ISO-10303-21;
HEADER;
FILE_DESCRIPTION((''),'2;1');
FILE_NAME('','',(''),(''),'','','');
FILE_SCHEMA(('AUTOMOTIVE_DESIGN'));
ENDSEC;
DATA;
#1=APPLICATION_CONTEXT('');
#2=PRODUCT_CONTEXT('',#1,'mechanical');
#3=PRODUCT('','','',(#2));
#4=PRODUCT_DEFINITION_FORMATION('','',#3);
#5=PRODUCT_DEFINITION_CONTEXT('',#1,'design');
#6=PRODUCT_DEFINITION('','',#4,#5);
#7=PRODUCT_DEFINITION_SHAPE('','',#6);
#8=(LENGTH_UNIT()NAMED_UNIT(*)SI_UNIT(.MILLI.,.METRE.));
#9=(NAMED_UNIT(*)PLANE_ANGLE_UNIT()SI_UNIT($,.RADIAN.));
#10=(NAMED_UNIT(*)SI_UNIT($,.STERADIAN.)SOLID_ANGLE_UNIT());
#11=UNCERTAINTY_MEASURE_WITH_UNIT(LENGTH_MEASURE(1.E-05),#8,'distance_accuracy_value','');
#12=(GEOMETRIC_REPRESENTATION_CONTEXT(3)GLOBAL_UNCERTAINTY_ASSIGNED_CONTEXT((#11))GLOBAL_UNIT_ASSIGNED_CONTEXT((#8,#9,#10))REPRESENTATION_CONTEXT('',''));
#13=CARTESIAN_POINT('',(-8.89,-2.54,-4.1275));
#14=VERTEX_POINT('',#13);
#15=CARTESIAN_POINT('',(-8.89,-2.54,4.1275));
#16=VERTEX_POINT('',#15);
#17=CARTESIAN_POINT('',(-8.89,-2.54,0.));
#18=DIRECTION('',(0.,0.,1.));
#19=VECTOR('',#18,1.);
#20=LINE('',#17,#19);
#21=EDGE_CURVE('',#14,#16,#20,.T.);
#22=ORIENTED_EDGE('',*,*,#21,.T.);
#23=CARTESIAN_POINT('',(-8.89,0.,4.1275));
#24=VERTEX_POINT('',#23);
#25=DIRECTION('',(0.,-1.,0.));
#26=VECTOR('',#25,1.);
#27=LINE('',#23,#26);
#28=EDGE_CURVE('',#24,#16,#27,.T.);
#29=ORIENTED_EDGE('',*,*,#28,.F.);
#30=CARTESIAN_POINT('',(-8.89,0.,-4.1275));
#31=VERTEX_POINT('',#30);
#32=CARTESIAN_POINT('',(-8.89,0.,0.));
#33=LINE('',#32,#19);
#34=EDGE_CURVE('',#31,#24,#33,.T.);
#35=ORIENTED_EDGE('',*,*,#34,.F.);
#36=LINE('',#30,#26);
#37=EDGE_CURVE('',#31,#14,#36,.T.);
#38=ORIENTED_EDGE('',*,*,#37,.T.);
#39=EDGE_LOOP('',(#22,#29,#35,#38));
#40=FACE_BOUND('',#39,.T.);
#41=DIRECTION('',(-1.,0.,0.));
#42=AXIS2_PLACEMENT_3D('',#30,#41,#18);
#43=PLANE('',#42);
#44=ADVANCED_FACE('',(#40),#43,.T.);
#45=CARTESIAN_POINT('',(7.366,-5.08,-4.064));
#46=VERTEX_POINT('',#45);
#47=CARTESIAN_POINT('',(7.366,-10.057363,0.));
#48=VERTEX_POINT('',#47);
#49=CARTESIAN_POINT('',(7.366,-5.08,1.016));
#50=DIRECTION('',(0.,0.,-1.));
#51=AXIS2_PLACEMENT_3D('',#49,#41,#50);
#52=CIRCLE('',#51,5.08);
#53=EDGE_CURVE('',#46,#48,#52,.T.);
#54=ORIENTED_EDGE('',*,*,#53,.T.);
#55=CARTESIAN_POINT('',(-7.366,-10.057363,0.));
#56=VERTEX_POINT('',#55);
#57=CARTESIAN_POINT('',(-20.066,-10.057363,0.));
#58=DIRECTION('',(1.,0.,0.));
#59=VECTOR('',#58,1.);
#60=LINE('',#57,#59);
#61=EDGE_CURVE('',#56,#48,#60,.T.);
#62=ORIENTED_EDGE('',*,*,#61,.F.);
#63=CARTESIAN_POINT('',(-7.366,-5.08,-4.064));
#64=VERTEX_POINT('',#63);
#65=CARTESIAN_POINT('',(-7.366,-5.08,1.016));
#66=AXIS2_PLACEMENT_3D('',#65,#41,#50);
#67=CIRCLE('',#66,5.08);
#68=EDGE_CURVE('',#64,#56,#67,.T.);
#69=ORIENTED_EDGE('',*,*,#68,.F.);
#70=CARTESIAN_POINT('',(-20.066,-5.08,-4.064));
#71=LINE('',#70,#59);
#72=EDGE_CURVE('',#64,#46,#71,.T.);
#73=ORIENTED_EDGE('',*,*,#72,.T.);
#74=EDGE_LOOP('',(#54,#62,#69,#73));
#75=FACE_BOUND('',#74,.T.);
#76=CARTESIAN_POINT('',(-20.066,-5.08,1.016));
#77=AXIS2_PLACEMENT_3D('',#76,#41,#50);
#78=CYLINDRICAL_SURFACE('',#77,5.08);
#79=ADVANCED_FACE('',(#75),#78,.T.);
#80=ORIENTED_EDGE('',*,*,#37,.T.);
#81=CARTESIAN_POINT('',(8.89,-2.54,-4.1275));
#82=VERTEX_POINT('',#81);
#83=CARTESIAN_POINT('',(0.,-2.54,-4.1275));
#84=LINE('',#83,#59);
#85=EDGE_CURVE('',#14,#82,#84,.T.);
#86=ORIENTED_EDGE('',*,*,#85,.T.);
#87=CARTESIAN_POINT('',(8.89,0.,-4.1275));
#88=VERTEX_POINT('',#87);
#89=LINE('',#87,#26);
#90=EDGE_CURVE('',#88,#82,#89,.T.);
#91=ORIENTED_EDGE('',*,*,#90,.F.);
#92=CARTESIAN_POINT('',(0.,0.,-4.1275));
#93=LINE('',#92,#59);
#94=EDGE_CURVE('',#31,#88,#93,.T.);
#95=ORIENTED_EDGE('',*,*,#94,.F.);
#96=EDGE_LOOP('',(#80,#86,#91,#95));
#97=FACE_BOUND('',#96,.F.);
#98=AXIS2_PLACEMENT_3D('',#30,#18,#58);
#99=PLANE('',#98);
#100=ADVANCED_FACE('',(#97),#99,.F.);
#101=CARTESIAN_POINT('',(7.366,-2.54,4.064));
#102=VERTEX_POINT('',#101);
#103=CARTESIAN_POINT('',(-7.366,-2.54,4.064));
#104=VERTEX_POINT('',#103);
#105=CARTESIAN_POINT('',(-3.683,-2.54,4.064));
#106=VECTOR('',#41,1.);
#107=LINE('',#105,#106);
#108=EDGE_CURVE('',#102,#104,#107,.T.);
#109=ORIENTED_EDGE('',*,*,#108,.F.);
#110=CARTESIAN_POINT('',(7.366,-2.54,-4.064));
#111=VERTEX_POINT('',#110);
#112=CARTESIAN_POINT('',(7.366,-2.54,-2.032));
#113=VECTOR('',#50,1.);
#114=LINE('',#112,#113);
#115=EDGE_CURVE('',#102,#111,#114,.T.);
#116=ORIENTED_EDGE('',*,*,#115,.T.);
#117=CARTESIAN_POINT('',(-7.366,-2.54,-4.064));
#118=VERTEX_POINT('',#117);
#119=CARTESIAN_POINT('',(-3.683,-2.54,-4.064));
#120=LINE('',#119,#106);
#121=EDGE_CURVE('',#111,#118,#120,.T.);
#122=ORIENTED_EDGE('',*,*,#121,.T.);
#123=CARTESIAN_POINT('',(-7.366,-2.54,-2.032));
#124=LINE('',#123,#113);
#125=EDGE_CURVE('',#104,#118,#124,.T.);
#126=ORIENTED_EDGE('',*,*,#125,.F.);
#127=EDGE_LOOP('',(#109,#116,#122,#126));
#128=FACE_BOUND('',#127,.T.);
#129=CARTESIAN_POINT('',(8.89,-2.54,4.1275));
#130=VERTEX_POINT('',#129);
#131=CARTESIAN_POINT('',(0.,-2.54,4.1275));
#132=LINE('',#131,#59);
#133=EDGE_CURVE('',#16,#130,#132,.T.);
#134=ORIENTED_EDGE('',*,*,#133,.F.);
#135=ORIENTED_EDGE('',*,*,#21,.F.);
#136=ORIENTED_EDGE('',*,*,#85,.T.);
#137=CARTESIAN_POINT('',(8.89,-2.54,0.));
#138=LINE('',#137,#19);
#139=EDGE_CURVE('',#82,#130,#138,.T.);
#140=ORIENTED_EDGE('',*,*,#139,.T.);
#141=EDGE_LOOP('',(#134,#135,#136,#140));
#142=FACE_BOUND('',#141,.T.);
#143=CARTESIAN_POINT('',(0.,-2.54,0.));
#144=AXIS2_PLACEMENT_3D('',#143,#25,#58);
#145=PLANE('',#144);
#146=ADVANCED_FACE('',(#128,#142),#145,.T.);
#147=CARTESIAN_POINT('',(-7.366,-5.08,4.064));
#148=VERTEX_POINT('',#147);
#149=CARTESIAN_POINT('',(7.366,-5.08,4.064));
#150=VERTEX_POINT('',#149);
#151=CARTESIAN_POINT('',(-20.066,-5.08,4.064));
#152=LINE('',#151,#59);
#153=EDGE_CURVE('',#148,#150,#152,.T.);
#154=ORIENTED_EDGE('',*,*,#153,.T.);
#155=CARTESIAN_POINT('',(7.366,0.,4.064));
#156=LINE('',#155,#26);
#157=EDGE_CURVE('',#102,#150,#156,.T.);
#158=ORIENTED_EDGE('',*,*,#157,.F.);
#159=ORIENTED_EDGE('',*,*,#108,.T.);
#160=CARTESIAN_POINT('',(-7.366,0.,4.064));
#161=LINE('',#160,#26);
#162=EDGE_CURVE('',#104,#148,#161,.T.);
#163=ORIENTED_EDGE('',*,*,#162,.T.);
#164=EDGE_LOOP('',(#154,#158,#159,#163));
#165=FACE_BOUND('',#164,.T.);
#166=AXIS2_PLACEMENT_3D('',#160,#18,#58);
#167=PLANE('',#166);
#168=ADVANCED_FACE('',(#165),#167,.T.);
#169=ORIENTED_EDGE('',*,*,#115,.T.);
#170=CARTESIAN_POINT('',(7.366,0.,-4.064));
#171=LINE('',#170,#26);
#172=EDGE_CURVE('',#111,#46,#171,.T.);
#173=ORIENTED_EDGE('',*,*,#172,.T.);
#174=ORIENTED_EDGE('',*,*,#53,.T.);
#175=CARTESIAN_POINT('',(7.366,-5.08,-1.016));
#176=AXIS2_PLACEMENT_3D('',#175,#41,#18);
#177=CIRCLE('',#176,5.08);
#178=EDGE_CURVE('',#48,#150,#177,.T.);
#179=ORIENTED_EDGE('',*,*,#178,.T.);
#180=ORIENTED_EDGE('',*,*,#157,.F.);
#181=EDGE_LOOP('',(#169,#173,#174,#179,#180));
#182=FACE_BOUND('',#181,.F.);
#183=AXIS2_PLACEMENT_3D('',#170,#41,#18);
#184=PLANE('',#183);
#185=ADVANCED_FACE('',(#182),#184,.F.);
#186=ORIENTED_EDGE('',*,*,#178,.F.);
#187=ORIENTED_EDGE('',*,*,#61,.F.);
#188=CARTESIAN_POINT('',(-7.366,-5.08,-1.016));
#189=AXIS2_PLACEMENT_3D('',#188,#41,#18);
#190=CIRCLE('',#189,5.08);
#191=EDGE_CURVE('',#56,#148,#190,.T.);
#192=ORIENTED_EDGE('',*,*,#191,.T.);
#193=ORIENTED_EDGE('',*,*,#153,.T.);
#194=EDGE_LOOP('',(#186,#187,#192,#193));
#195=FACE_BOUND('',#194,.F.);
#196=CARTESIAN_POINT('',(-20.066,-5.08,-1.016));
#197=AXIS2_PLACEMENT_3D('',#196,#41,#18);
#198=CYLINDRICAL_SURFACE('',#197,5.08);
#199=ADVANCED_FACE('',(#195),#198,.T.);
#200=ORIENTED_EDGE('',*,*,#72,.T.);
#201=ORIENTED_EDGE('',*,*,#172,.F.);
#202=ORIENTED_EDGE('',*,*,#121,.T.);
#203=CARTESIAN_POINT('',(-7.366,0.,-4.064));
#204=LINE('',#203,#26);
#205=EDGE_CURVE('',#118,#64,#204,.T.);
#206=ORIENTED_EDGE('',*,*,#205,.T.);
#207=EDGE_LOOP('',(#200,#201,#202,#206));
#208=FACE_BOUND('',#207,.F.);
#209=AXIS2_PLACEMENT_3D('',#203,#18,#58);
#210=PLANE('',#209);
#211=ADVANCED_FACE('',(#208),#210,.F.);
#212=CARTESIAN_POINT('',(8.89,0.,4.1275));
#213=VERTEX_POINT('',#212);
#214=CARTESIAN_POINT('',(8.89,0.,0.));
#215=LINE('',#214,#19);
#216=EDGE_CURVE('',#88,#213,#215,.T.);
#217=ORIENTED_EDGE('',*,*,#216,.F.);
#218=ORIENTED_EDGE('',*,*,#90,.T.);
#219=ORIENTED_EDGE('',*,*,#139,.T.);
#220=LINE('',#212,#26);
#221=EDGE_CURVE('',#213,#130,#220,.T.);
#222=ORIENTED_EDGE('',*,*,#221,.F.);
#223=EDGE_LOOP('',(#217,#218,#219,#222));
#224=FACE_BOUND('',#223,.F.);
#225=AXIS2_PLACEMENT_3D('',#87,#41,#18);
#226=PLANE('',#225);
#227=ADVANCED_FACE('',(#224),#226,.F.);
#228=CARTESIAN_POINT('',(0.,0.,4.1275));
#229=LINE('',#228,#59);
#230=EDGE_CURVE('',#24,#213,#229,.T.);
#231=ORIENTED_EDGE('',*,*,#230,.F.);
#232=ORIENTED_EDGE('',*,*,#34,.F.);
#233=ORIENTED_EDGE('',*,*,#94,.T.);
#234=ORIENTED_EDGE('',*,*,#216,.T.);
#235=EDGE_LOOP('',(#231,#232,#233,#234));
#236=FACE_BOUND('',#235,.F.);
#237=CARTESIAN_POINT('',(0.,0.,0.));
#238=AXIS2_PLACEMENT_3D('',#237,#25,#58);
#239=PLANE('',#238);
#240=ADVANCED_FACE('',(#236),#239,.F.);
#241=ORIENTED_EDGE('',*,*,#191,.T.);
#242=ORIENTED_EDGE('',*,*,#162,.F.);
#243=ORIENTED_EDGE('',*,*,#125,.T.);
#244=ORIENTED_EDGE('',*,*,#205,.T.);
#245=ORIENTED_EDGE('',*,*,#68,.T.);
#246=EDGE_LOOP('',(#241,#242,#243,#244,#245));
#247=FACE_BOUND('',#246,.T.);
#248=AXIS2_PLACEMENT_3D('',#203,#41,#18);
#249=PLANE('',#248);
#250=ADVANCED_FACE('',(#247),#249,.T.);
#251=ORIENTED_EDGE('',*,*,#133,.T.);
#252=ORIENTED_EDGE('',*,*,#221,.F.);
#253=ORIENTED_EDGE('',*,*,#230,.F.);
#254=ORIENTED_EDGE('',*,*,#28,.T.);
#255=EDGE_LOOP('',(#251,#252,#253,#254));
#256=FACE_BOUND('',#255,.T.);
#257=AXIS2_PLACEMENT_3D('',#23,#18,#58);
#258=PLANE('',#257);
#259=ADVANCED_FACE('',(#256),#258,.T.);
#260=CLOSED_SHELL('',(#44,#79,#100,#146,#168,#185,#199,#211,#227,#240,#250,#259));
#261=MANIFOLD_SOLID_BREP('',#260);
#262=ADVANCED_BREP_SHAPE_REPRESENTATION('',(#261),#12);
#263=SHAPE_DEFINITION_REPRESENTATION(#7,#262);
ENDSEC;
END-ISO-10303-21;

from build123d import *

# Parameters (mm, degrees)
F0_W        = 17.78
F0_H        = 8.255
F1_DEPTH    = 2.54
F2_W        = 14.732
F2_H        = 8.128
F3_DEPTH    = 10.16
F4_T1_DEPTH = 40.132


# Not quite as in the source:
# - a fillet or chamfer that OpenCascade refuses, or shapes differently, is made with other operations: its cross-section is extruded or revolved along the edge and cut away or added


with BuildPart() as f1:
    # F0 (on Front) → F1 (new body)
    with BuildSketch(Plane.XZ):
        Rectangle(F0_W, F0_H)
    extrude(amount=F1_DEPTH)

    # F2 (on Front) → F3 (join)
    with BuildSketch(Plane.XZ):
        Rectangle(F2_W, F2_H)
    extrude(amount=F3_DEPTH)

    # F4: fillet of radius 5.08 on 2 edges, made by hand

    # F4_s2 → F4_t1 (cut)
    with BuildSketch(Plane.YZ.offset(-20.066)):
        with BuildLine():
            ThreePointArc((-5.08, 4.064), (-8.6721024484, 2.5761024484), (-10.16, -1.016))
            Line((-10.16, -1.016), (-10.16, 4.064))
            Line((-10.16, 4.064), (-5.08, 4.064))
        make_face()
        with BuildLine():
            ThreePointArc((-5.08, -4.064), (-8.6721024484, -2.5761024484), (-10.16, 1.016))
            Line((-10.16, 1.016), (-10.16, -4.064))
            Line((-10.16, -4.064), (-5.08, -4.064))
        make_face()
    extrude(amount=F4_T1_DEPTH, mode=Mode.SUBTRACT)


solid = f1.part
